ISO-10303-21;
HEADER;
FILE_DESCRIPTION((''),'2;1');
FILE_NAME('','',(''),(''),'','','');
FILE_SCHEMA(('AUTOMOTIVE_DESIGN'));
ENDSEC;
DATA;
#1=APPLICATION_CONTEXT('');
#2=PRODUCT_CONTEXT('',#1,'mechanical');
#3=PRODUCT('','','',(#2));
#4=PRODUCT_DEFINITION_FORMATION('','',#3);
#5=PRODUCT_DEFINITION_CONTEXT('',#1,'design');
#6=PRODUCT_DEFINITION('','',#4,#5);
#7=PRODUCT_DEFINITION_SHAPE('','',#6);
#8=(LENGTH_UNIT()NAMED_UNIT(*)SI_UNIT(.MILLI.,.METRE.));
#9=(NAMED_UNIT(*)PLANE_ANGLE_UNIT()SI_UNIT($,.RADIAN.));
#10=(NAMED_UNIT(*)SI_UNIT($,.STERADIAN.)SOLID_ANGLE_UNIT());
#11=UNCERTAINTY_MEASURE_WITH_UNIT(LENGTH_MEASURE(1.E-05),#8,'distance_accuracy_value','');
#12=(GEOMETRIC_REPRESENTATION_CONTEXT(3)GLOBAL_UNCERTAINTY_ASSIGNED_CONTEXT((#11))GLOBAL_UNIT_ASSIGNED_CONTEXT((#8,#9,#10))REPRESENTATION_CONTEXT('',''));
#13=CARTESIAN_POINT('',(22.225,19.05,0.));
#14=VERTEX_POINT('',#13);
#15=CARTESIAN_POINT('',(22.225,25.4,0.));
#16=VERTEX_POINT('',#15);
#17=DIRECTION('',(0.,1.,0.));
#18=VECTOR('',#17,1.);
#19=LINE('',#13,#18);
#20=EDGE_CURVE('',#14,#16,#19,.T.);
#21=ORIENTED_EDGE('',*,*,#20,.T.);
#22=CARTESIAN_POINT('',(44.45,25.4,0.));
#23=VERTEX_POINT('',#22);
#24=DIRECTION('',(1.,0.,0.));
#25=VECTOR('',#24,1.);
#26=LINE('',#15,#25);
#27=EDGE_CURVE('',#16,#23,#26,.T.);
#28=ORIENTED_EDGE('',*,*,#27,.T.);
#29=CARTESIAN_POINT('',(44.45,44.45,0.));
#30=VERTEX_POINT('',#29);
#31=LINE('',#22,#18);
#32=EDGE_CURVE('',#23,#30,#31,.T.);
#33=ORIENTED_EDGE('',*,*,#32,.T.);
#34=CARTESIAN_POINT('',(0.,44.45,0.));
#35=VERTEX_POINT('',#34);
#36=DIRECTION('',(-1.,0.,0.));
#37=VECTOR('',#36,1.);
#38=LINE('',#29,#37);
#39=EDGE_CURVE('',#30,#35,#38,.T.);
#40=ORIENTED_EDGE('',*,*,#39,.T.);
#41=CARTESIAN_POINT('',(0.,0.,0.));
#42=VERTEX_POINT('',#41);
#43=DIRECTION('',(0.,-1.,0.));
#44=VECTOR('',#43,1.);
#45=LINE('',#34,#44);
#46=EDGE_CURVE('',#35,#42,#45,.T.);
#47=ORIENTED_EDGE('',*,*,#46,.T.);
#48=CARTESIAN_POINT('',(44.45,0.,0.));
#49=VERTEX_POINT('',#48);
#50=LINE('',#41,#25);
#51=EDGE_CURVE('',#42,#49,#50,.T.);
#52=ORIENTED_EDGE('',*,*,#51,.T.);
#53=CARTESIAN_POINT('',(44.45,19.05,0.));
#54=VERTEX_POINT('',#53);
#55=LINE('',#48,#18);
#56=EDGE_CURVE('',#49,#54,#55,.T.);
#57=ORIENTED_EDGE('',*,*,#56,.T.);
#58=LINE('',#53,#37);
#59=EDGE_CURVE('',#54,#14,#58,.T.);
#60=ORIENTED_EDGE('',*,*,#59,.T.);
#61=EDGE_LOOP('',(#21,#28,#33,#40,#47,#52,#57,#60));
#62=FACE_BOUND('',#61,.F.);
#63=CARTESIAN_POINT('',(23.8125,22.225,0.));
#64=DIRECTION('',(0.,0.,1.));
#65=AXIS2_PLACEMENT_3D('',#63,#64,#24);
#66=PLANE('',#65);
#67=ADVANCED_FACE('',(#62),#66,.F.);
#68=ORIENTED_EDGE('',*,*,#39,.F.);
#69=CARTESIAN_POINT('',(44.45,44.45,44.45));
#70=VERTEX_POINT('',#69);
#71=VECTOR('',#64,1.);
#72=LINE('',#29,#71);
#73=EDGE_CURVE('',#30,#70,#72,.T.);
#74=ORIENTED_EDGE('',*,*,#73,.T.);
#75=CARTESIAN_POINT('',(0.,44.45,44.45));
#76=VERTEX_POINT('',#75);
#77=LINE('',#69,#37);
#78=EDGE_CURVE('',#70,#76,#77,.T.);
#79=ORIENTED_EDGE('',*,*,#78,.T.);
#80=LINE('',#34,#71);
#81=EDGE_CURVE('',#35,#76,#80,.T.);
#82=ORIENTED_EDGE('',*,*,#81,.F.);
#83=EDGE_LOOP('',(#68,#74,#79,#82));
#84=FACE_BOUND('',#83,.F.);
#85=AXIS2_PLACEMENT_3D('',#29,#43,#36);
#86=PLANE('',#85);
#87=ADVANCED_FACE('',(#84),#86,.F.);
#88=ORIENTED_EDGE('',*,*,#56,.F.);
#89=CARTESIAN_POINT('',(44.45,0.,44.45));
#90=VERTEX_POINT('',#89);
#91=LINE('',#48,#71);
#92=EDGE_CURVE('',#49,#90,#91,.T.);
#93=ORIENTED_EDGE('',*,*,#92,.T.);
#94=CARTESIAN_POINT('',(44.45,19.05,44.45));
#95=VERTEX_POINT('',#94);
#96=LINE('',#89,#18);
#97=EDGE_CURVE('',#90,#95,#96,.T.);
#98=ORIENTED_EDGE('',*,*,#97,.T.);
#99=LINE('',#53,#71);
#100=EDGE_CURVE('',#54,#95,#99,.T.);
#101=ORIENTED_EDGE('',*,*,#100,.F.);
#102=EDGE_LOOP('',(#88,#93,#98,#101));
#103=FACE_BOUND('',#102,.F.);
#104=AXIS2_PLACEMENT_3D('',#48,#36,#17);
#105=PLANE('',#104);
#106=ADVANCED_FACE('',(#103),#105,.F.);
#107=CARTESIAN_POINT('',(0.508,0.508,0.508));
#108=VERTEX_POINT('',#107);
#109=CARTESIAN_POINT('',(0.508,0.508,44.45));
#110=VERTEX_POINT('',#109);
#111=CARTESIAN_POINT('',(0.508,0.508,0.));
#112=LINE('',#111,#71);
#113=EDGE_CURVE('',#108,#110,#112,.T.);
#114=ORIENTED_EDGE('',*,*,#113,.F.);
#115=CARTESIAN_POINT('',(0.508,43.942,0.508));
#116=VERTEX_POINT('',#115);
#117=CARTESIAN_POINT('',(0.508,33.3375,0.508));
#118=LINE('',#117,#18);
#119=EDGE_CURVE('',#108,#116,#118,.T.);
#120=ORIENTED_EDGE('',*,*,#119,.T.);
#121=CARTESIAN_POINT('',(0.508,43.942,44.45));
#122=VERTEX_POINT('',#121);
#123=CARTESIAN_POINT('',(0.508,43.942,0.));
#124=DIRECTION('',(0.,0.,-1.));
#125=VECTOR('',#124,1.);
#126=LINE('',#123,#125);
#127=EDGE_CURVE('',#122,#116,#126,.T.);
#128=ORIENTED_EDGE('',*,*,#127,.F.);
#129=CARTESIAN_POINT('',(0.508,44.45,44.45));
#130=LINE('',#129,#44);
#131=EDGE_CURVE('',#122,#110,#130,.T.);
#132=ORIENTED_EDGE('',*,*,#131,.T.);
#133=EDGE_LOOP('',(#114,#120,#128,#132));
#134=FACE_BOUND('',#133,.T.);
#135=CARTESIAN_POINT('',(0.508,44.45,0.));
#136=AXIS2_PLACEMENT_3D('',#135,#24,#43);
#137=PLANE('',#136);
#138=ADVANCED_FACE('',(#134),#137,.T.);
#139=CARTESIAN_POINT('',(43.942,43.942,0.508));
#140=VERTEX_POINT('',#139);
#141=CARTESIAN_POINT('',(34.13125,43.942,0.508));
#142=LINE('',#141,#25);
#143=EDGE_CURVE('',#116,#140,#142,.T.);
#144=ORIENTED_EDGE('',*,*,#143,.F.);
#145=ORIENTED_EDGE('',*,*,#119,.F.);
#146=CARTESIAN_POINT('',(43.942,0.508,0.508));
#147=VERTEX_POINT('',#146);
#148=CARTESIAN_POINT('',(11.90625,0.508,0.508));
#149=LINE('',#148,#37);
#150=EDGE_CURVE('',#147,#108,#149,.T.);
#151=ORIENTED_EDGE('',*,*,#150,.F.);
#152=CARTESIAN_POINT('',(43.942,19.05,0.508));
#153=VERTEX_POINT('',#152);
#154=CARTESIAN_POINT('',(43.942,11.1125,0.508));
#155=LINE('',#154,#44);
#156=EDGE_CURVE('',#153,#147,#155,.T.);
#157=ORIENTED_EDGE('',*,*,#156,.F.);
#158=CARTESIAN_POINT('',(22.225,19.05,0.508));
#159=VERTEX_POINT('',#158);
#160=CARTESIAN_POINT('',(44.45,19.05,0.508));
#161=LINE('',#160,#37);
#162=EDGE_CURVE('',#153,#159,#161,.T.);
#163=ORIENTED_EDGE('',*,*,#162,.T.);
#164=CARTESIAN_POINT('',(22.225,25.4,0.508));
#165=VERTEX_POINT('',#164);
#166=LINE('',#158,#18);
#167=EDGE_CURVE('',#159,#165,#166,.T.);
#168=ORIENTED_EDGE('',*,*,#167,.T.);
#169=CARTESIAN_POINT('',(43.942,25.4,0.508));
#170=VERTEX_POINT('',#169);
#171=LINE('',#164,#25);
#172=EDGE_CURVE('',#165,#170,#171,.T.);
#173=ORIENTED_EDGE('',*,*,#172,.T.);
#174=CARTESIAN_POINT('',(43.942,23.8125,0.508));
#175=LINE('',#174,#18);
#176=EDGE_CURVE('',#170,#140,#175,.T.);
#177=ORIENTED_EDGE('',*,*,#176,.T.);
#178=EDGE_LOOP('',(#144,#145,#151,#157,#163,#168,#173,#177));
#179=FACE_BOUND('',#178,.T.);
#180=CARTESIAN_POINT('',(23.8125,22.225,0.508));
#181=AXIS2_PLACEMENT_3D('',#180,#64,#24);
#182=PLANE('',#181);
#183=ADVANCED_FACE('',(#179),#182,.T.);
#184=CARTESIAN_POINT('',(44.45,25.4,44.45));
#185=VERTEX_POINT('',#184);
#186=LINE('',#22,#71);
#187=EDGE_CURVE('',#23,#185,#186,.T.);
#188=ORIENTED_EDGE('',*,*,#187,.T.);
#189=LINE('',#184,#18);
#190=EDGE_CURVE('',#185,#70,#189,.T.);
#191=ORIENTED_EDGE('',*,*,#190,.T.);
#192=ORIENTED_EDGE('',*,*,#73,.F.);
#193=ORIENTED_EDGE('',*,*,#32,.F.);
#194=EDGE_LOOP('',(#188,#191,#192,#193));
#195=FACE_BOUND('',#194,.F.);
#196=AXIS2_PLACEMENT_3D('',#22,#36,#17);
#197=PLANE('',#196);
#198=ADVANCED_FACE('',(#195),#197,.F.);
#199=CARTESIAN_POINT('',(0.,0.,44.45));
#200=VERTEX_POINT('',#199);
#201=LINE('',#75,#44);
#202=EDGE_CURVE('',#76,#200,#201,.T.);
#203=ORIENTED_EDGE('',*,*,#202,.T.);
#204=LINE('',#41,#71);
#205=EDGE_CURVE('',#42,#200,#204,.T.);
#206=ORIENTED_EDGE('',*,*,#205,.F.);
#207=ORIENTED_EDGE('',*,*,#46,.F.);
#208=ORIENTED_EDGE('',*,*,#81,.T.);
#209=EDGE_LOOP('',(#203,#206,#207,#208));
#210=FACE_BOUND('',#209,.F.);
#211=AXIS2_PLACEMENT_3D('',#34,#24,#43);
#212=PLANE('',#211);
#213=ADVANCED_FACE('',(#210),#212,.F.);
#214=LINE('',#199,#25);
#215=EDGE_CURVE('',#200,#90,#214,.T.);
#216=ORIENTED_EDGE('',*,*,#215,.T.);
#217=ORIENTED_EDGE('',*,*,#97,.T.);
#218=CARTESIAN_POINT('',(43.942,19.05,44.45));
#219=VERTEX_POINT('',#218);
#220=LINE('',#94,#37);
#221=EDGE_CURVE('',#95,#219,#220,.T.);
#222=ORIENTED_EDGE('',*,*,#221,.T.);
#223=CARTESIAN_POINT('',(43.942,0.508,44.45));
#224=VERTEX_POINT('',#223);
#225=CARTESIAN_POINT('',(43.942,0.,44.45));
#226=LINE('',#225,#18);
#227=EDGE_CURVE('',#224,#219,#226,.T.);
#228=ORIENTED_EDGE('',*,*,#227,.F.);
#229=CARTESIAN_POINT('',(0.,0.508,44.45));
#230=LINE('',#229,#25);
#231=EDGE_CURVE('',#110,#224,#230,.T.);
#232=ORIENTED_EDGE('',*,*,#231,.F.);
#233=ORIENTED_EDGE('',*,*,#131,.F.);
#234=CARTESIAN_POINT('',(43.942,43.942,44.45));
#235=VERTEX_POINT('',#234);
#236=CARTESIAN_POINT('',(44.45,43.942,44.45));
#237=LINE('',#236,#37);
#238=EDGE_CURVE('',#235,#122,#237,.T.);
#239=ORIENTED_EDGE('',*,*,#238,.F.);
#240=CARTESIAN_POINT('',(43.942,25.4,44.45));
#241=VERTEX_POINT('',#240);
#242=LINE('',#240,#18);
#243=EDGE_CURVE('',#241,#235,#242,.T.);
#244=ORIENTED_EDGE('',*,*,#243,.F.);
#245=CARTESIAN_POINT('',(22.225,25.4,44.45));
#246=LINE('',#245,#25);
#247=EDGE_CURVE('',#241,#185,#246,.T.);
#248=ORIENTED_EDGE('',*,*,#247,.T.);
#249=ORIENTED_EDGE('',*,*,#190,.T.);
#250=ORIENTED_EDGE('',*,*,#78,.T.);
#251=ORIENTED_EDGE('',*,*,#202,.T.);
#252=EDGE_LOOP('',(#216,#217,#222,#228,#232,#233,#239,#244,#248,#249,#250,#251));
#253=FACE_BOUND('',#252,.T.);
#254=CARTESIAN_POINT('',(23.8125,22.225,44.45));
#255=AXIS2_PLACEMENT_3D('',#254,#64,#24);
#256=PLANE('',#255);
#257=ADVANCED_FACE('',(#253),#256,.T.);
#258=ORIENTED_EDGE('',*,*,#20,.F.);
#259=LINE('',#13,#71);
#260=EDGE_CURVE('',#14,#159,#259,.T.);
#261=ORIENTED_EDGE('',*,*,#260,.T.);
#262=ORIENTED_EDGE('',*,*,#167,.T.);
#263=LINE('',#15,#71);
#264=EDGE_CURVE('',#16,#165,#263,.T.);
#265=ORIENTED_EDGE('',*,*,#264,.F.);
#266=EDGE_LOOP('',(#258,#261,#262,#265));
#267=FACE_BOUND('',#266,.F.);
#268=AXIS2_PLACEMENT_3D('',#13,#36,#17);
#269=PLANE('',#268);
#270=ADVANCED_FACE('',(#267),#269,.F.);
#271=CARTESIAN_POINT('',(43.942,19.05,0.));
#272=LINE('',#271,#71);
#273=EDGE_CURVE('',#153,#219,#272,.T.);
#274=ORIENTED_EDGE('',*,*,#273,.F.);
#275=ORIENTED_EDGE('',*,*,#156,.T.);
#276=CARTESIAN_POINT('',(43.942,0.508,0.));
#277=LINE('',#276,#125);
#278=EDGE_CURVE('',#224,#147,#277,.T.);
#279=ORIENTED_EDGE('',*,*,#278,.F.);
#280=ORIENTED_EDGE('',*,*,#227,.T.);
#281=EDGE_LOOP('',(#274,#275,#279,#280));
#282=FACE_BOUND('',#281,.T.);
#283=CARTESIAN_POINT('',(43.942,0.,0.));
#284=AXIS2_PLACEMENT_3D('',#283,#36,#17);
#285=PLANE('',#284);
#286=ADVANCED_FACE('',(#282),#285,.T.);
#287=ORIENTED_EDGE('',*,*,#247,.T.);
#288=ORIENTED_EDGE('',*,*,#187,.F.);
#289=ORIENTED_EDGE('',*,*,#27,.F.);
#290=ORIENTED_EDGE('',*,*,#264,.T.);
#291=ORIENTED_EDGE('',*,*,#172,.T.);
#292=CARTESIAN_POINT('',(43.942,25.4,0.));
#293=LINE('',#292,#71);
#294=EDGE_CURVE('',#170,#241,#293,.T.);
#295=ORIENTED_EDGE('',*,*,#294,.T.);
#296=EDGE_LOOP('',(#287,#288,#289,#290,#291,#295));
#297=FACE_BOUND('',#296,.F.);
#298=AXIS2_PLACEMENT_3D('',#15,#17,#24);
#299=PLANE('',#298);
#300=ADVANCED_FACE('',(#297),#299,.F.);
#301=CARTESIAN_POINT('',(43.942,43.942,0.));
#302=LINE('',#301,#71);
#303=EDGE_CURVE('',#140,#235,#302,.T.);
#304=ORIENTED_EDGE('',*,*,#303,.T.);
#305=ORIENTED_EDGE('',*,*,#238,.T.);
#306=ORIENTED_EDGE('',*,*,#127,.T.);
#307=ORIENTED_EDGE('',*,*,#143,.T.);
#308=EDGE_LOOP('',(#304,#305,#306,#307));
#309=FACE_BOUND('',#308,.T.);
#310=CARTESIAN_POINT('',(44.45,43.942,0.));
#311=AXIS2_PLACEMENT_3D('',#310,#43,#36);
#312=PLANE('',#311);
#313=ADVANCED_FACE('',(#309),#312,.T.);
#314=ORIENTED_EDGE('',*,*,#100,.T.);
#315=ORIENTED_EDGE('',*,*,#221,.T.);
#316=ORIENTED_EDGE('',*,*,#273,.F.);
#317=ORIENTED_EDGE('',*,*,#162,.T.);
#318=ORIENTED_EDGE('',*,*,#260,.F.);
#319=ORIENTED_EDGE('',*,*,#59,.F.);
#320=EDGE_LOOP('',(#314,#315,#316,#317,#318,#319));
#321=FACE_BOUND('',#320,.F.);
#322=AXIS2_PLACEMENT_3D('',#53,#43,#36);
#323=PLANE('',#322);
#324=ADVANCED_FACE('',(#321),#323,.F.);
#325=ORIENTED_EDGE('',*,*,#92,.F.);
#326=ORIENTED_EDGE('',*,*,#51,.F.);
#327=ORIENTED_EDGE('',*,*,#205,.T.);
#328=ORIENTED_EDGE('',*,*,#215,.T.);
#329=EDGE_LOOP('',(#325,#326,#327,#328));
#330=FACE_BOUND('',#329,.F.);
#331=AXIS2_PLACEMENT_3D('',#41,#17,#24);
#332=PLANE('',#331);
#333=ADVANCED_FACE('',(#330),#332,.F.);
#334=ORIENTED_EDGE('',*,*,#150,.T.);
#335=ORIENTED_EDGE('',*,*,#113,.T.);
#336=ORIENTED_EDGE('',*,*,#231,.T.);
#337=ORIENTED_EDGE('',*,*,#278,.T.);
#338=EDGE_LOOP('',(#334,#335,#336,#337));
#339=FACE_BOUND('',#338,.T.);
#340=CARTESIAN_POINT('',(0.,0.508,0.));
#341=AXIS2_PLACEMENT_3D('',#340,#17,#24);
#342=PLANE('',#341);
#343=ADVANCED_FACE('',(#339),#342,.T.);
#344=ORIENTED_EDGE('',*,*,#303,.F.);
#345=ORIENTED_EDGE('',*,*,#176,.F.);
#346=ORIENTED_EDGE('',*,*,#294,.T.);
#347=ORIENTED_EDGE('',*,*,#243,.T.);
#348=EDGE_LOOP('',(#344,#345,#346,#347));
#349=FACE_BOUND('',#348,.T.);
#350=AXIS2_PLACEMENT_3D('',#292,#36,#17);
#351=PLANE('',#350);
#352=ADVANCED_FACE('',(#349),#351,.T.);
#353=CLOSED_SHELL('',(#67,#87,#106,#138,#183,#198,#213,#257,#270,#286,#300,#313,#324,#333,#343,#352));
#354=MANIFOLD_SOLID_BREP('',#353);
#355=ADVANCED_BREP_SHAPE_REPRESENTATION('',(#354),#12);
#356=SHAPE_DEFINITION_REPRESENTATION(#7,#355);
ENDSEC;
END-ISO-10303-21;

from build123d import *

# Parameters (mm, degrees)
F1_DEPTH = 44.45
F2_T     = -0.508


# Not quite as in the source:
# - the program builds the solid bodies; features that only make, move or delete a surface that nothing else refers to are left out


with BuildPart() as f1:
    # F0 (on Top) → F1 (new body)
    with BuildSketch(Plane.XY):
        Polygon((0, 44.45), (0, 0), (44.45, 0), (44.45, 19.05), (22.225, 19.05), (22.225, 25.4), (44.45, 25.4), (44.45, 44.45), align=None)
    extrude(amount=F1_DEPTH)

    # F2
    f2_openings = [f1.faces().sort_by_distance(p)[0] for p in [
        (21.370192, 22.225, 44.45),
        (22.225, 22.225, 22.225),
        (33.3375, 25.4, 22.225),
        (33.3375, 19.05, 22.225),
    ]]
    offset(amount=F2_T, openings=f2_openings)


solid = f1.part
